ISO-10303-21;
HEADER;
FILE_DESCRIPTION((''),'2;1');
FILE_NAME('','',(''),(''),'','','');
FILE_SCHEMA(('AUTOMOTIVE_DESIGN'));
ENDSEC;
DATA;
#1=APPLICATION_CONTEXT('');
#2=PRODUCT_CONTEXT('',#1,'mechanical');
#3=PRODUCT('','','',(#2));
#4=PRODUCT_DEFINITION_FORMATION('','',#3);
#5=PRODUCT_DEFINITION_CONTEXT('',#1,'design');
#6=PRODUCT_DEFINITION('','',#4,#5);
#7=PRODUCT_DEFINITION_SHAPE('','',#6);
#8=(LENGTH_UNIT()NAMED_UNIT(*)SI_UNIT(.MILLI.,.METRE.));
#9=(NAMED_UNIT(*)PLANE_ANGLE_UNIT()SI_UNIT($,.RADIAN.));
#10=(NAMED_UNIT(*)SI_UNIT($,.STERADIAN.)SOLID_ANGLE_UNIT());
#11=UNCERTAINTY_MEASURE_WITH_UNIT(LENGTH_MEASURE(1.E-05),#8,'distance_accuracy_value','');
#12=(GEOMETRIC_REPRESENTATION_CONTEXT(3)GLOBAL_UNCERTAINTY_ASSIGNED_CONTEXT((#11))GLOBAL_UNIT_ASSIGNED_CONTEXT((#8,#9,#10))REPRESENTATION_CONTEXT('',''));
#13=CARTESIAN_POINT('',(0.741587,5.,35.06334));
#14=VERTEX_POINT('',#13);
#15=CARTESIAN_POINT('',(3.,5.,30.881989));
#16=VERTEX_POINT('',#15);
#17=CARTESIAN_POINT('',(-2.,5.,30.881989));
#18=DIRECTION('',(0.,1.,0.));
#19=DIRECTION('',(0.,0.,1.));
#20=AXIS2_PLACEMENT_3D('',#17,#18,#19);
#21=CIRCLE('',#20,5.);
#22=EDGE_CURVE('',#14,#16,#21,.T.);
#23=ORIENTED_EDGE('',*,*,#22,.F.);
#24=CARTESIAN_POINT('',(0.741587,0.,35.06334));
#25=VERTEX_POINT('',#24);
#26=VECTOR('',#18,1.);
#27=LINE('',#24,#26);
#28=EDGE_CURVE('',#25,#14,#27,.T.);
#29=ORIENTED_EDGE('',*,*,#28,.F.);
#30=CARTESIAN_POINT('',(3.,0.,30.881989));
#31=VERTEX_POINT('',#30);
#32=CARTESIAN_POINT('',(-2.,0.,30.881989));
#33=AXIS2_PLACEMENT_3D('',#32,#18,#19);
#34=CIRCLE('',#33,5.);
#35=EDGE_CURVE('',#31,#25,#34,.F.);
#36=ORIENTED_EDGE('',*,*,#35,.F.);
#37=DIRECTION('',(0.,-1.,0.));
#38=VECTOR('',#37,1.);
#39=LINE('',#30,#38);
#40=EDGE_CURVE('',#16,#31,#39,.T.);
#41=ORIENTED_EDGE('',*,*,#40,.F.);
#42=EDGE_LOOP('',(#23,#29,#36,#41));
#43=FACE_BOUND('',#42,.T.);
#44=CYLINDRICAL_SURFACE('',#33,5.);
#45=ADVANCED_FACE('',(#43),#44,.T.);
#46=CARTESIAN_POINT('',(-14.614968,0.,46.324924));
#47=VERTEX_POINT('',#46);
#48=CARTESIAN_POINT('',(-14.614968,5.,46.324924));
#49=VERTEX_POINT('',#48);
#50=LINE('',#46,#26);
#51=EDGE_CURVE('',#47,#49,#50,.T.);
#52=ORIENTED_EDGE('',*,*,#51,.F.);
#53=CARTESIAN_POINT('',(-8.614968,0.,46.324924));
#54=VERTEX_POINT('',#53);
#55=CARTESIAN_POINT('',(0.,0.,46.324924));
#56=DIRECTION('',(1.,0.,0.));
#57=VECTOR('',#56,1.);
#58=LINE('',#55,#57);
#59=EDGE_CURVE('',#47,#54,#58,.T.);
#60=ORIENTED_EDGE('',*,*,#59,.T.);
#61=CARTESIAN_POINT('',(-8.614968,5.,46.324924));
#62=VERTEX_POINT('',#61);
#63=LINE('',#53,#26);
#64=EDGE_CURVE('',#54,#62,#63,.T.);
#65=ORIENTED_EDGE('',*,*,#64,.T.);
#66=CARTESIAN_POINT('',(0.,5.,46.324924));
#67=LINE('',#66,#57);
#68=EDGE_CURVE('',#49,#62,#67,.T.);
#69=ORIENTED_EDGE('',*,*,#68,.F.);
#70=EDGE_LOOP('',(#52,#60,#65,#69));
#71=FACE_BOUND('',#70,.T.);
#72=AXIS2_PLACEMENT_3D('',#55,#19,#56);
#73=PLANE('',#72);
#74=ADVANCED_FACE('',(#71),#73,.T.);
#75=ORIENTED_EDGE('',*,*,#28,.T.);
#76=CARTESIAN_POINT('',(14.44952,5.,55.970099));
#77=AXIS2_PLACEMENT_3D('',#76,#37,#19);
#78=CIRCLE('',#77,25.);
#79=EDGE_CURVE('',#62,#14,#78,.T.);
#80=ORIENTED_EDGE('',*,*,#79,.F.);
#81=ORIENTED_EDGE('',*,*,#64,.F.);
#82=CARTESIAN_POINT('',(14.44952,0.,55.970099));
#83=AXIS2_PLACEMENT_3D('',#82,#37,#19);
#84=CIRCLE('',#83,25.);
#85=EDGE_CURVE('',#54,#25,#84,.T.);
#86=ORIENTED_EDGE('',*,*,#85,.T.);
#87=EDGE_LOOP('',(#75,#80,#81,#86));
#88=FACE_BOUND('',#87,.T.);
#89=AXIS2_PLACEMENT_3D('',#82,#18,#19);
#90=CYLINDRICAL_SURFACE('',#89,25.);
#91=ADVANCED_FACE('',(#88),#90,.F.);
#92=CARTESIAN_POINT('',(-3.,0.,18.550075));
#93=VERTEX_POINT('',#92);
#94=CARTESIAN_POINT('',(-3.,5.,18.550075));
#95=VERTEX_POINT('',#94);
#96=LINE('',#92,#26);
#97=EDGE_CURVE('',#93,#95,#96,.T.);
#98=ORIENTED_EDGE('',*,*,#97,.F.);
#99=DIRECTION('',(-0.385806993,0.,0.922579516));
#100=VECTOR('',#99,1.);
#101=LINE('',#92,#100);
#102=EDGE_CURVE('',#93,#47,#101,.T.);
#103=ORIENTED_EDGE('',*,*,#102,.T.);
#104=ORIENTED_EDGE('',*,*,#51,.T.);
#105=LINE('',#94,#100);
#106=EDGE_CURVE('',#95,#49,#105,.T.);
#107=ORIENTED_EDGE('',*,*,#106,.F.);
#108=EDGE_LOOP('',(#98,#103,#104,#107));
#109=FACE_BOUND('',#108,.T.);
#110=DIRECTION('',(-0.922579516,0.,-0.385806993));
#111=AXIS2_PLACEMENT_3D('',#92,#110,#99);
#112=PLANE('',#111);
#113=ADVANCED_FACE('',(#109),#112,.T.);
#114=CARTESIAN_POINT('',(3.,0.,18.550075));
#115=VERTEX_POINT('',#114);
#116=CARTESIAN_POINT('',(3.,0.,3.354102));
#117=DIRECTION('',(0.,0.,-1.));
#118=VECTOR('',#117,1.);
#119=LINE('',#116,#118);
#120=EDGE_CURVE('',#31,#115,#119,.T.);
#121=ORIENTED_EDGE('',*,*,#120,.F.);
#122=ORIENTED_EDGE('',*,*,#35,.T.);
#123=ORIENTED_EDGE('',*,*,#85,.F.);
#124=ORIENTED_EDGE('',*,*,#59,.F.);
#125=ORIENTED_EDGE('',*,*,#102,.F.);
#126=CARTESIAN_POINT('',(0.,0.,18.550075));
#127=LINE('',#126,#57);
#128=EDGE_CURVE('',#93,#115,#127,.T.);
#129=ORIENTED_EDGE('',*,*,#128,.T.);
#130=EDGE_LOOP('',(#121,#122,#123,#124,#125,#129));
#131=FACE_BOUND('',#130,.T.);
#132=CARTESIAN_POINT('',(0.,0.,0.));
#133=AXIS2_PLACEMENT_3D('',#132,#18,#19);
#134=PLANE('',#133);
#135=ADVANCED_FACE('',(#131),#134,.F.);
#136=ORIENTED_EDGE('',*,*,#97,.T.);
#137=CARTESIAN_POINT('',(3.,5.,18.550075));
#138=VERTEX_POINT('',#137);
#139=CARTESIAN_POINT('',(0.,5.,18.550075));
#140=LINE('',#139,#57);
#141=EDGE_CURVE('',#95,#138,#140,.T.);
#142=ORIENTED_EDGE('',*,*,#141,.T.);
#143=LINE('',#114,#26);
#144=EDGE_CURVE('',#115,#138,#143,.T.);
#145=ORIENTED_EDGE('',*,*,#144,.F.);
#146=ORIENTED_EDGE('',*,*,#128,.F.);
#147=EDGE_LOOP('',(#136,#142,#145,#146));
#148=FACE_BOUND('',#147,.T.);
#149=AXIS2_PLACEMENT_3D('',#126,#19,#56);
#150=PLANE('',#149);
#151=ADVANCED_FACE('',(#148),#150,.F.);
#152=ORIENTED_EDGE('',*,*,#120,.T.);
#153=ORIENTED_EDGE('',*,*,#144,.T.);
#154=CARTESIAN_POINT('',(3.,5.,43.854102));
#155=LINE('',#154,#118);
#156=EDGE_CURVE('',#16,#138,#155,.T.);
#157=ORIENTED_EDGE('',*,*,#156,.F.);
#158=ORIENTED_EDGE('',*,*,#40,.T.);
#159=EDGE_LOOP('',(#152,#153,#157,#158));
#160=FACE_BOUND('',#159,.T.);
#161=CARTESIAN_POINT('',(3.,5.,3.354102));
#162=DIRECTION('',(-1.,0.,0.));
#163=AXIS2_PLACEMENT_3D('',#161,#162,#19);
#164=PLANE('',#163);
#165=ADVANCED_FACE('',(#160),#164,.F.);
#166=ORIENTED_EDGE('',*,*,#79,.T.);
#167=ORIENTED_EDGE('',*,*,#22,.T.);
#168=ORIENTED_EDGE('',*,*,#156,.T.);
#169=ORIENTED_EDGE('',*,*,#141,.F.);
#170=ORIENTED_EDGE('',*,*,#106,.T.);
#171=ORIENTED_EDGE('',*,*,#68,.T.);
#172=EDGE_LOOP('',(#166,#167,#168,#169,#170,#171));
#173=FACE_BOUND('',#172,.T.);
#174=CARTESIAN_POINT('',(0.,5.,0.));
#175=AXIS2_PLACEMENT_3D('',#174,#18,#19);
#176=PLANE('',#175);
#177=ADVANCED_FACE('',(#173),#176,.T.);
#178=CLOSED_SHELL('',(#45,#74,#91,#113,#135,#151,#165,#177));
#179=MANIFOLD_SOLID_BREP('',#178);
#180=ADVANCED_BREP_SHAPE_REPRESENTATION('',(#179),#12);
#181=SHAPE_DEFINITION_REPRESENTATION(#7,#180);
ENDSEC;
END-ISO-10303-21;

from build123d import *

# Parameters (mm, degrees)
EXTRUDE_2_DEPTH     = 5
SKETCH_4_R          = 1.65
CUT_EXTRUDE_1_DEPTH = 5
EXTRUDE_3_DEPTH     = 5
CUT_EXTRUDE_START   = -4.5
SKETCH_7_R          = 3
CUT_EXTRUDE_2_DEPTH = 3
CUT_EXTRUDE_3_DEPTH = 7.5
EXTRUDE_4_DEPTH     = 5
FILLET_1_R          = 5
FILLET_2_R          = 5
SKETCH_10_R         = 1.65
CUT_EXTRUDE_4_DEPTH = 5


with BuildPart() as part:
    # 草图3 → 凸台-拉伸2 (new body)
    with BuildSketch(Plane(origin=(0, 0, 0), x_dir=(1, 0, 0), z_dir=(0, 1, 0))):
        with BuildLine():
            Line((-3, -3.354101966), (-3, -7.416198487))
            Line((-3, -7.416198487), (-3, -43.854101966))
            Line((-3, -43.854101966), (3, -43.854101966))
            Line((3, -43.854101966), (3, -10.583005244))
            Line((3, -10.583005244), (3, -7.416198487))
            Line((3, -7.416198487), (3, -3.354101966))
            ThreePointArc((3, -3.354101966), (0, 4.5), (-3, -3.354101966))
        make_face()
    extrude(amount=EXTRUDE_2_DEPTH)

    # 草图4 → 切除-拉伸1 (cut)
    with BuildSketch(Plane(origin=(0, 5, 0), x_dir=(1, 0, 0), z_dir=(0, 1, 0))):
        with Locations(Location((0, 0, 0), (0, 0, 270))):
            Circle(SKETCH_4_R)
    extrude(amount=-CUT_EXTRUDE_1_DEPTH, mode=Mode.SUBTRACT)

    # 草图6 → 凸台-拉伸3 (add)
    with BuildSketch(Plane(origin=(0, 5, 0), x_dir=(1, 0, 0), z_dir=(0, 1, 0))):
        with BuildLine():
            Line((3, -33.74604712), (-3, -33.74604712))
            ThreePointArc((-3, -33.74604712), (-16.46902092, -57.986607816), (0.722500961, -79.745993902))
            Line((0.722500961, -79.745993902), (1.949520222, -77.620734201))
            ThreePointArc((1.949520222, -77.620734201), (-10.543317179, -55.371702353), (3, -33.74604712))
        make_face()
    extrude(amount=-EXTRUDE_3_DEPTH)

    # 草图7 → 切除-拉伸2 (cut)
    with BuildSketch(Plane(origin=(0, 5, 0), x_dir=(1, 0, 0), z_dir=(0, 1, 0)).offset(CUT_EXTRUDE_START)):
        with Locations(Location((0, 0, 0), (0, 0, 270))):
            Circle(SKETCH_7_R)
    extrude(amount=-CUT_EXTRUDE_2_DEPTH, mode=Mode.SUBTRACT)

    # 草图8 → 切除-拉伸3 (cut)
    with BuildSketch(Plane(origin=(0, 5, 0), x_dir=(1, 0, 0), z_dir=(0, 1, 0))):
        with BuildLine():
            Line((-3, -38.067187498), (-3, -43.854101966))
            Line((-3, -43.854101966), (3, -43.854101966))
            Line((3, -43.854101966), (3, -33.74604712))
            ThreePointArc((3, -33.74604712), (-0.160637142, -35.683569047), (-3, -38.067187498))
        make_face()
    extrude(amount=-CUT_EXTRUDE_3_DEPTH, mode=Mode.SUBTRACT)

    # 草图9 → 凸台-拉伸4 (add)
    with BuildSketch(Plane(origin=(0, 5, 0), x_dir=(1, 0, 0), z_dir=(0, 1, 0))):
        with BuildLine():
            Line((-3, -18.550074543), (-14.614967684, -46.324924269))
            ThreePointArc((-14.614967684, -46.324924269), (-9.917875534, -39.010182445), (-3, -33.74604712))
            Line((-3, -33.74604712), (-3, -18.550074543))
        make_face()
    extrude(amount=-EXTRUDE_4_DEPTH)

    # 圆角1
    fillet_1_edges = [part.edges().sort_by_distance(p)[0] for p in [
        (3, 2.5, 33.74604712),
    ]]
    fillet(fillet_1_edges, radius=FILLET_1_R)

    # 圆角2
    # the kernel refuses this fillet: 5 mm, written as the material it takes off along each edge
    with BuildSketch(Plane(origin=(1.949520222, 14.371610933, 77.620734201), x_dir=(-0.8261015944022844, 0, -0.5635212114250925), z_dir=(0, -1, 0))) as fillet_2_piece_1:
        with BuildLine():
            CenterArc((4.123508811, -4.985927863), FILLET_2_R, 94.299664485, 55.185648669)
            Line((-0.183986354, -2.447131808), (-0.270136257, -2.396355887))
            ThreePointArc((-0.270136257, -2.396355887), (-0.191711734, -1.216068615), (-0.099718557, 0.007497289))
            Line((-0.099718557, 0.007497289), (0.007497289, 0.099718557))
            ThreePointArc((0.007497289, 0.099718557), (1.874322187, 0.029639314), (3.741147084, 0.099718557))
            Line((3.741147084, 0.099718557), (3.748644373, 0))
        make_face()
    extrude(amount=23.743221866, mode=Mode.SUBTRACT)

    # 草图10 → 切除-拉伸4 (cut)
    # profile 1 of 2: a face of its own
    with BuildSketch(Plane(origin=(0, 5, 0), x_dir=(1, 0, 0), z_dir=(0, 1, 0))):
        with BuildLine():
            Line((-3, -3.354101966), (-3, -18.550074543))
            Line((-3, -18.550074543), (3, -18.550074543))
            Line((3, -18.550074543), (3, -3.354101966))
            ThreePointArc((3, -3.354101966), (0, 4.5), (-3, -3.354101966))
        make_face()
        Circle(SKETCH_10_R, mode=Mode.SUBTRACT)
    # profile 2 of 2: a face of its own
    with BuildSketch(Plane(origin=(0, 5, 0), x_dir=(1, 0, 0), z_dir=(0, 1, 0))):
        with BuildLine():
            Line((-8.614967684, -46.324924269), (-14.614967684, -46.324924269))
            ThreePointArc((-14.614967684, -46.324924269), (-14.272081884, -66.397409294), (0.722500961, -79.745993902))
            ThreePointArc((0.722500961, -79.745993902), (0.307928877, -77.397579493), (-1.147240872, -75.508293582))
            ThreePointArc((-1.147240872, -75.508293582), (-9.770106213, -62.167654699), (-8.614967684, -46.324924269))
        make_face()
    extrude(amount=-CUT_EXTRUDE_4_DEPTH, mode=Mode.SUBTRACT)


solid = part.part
